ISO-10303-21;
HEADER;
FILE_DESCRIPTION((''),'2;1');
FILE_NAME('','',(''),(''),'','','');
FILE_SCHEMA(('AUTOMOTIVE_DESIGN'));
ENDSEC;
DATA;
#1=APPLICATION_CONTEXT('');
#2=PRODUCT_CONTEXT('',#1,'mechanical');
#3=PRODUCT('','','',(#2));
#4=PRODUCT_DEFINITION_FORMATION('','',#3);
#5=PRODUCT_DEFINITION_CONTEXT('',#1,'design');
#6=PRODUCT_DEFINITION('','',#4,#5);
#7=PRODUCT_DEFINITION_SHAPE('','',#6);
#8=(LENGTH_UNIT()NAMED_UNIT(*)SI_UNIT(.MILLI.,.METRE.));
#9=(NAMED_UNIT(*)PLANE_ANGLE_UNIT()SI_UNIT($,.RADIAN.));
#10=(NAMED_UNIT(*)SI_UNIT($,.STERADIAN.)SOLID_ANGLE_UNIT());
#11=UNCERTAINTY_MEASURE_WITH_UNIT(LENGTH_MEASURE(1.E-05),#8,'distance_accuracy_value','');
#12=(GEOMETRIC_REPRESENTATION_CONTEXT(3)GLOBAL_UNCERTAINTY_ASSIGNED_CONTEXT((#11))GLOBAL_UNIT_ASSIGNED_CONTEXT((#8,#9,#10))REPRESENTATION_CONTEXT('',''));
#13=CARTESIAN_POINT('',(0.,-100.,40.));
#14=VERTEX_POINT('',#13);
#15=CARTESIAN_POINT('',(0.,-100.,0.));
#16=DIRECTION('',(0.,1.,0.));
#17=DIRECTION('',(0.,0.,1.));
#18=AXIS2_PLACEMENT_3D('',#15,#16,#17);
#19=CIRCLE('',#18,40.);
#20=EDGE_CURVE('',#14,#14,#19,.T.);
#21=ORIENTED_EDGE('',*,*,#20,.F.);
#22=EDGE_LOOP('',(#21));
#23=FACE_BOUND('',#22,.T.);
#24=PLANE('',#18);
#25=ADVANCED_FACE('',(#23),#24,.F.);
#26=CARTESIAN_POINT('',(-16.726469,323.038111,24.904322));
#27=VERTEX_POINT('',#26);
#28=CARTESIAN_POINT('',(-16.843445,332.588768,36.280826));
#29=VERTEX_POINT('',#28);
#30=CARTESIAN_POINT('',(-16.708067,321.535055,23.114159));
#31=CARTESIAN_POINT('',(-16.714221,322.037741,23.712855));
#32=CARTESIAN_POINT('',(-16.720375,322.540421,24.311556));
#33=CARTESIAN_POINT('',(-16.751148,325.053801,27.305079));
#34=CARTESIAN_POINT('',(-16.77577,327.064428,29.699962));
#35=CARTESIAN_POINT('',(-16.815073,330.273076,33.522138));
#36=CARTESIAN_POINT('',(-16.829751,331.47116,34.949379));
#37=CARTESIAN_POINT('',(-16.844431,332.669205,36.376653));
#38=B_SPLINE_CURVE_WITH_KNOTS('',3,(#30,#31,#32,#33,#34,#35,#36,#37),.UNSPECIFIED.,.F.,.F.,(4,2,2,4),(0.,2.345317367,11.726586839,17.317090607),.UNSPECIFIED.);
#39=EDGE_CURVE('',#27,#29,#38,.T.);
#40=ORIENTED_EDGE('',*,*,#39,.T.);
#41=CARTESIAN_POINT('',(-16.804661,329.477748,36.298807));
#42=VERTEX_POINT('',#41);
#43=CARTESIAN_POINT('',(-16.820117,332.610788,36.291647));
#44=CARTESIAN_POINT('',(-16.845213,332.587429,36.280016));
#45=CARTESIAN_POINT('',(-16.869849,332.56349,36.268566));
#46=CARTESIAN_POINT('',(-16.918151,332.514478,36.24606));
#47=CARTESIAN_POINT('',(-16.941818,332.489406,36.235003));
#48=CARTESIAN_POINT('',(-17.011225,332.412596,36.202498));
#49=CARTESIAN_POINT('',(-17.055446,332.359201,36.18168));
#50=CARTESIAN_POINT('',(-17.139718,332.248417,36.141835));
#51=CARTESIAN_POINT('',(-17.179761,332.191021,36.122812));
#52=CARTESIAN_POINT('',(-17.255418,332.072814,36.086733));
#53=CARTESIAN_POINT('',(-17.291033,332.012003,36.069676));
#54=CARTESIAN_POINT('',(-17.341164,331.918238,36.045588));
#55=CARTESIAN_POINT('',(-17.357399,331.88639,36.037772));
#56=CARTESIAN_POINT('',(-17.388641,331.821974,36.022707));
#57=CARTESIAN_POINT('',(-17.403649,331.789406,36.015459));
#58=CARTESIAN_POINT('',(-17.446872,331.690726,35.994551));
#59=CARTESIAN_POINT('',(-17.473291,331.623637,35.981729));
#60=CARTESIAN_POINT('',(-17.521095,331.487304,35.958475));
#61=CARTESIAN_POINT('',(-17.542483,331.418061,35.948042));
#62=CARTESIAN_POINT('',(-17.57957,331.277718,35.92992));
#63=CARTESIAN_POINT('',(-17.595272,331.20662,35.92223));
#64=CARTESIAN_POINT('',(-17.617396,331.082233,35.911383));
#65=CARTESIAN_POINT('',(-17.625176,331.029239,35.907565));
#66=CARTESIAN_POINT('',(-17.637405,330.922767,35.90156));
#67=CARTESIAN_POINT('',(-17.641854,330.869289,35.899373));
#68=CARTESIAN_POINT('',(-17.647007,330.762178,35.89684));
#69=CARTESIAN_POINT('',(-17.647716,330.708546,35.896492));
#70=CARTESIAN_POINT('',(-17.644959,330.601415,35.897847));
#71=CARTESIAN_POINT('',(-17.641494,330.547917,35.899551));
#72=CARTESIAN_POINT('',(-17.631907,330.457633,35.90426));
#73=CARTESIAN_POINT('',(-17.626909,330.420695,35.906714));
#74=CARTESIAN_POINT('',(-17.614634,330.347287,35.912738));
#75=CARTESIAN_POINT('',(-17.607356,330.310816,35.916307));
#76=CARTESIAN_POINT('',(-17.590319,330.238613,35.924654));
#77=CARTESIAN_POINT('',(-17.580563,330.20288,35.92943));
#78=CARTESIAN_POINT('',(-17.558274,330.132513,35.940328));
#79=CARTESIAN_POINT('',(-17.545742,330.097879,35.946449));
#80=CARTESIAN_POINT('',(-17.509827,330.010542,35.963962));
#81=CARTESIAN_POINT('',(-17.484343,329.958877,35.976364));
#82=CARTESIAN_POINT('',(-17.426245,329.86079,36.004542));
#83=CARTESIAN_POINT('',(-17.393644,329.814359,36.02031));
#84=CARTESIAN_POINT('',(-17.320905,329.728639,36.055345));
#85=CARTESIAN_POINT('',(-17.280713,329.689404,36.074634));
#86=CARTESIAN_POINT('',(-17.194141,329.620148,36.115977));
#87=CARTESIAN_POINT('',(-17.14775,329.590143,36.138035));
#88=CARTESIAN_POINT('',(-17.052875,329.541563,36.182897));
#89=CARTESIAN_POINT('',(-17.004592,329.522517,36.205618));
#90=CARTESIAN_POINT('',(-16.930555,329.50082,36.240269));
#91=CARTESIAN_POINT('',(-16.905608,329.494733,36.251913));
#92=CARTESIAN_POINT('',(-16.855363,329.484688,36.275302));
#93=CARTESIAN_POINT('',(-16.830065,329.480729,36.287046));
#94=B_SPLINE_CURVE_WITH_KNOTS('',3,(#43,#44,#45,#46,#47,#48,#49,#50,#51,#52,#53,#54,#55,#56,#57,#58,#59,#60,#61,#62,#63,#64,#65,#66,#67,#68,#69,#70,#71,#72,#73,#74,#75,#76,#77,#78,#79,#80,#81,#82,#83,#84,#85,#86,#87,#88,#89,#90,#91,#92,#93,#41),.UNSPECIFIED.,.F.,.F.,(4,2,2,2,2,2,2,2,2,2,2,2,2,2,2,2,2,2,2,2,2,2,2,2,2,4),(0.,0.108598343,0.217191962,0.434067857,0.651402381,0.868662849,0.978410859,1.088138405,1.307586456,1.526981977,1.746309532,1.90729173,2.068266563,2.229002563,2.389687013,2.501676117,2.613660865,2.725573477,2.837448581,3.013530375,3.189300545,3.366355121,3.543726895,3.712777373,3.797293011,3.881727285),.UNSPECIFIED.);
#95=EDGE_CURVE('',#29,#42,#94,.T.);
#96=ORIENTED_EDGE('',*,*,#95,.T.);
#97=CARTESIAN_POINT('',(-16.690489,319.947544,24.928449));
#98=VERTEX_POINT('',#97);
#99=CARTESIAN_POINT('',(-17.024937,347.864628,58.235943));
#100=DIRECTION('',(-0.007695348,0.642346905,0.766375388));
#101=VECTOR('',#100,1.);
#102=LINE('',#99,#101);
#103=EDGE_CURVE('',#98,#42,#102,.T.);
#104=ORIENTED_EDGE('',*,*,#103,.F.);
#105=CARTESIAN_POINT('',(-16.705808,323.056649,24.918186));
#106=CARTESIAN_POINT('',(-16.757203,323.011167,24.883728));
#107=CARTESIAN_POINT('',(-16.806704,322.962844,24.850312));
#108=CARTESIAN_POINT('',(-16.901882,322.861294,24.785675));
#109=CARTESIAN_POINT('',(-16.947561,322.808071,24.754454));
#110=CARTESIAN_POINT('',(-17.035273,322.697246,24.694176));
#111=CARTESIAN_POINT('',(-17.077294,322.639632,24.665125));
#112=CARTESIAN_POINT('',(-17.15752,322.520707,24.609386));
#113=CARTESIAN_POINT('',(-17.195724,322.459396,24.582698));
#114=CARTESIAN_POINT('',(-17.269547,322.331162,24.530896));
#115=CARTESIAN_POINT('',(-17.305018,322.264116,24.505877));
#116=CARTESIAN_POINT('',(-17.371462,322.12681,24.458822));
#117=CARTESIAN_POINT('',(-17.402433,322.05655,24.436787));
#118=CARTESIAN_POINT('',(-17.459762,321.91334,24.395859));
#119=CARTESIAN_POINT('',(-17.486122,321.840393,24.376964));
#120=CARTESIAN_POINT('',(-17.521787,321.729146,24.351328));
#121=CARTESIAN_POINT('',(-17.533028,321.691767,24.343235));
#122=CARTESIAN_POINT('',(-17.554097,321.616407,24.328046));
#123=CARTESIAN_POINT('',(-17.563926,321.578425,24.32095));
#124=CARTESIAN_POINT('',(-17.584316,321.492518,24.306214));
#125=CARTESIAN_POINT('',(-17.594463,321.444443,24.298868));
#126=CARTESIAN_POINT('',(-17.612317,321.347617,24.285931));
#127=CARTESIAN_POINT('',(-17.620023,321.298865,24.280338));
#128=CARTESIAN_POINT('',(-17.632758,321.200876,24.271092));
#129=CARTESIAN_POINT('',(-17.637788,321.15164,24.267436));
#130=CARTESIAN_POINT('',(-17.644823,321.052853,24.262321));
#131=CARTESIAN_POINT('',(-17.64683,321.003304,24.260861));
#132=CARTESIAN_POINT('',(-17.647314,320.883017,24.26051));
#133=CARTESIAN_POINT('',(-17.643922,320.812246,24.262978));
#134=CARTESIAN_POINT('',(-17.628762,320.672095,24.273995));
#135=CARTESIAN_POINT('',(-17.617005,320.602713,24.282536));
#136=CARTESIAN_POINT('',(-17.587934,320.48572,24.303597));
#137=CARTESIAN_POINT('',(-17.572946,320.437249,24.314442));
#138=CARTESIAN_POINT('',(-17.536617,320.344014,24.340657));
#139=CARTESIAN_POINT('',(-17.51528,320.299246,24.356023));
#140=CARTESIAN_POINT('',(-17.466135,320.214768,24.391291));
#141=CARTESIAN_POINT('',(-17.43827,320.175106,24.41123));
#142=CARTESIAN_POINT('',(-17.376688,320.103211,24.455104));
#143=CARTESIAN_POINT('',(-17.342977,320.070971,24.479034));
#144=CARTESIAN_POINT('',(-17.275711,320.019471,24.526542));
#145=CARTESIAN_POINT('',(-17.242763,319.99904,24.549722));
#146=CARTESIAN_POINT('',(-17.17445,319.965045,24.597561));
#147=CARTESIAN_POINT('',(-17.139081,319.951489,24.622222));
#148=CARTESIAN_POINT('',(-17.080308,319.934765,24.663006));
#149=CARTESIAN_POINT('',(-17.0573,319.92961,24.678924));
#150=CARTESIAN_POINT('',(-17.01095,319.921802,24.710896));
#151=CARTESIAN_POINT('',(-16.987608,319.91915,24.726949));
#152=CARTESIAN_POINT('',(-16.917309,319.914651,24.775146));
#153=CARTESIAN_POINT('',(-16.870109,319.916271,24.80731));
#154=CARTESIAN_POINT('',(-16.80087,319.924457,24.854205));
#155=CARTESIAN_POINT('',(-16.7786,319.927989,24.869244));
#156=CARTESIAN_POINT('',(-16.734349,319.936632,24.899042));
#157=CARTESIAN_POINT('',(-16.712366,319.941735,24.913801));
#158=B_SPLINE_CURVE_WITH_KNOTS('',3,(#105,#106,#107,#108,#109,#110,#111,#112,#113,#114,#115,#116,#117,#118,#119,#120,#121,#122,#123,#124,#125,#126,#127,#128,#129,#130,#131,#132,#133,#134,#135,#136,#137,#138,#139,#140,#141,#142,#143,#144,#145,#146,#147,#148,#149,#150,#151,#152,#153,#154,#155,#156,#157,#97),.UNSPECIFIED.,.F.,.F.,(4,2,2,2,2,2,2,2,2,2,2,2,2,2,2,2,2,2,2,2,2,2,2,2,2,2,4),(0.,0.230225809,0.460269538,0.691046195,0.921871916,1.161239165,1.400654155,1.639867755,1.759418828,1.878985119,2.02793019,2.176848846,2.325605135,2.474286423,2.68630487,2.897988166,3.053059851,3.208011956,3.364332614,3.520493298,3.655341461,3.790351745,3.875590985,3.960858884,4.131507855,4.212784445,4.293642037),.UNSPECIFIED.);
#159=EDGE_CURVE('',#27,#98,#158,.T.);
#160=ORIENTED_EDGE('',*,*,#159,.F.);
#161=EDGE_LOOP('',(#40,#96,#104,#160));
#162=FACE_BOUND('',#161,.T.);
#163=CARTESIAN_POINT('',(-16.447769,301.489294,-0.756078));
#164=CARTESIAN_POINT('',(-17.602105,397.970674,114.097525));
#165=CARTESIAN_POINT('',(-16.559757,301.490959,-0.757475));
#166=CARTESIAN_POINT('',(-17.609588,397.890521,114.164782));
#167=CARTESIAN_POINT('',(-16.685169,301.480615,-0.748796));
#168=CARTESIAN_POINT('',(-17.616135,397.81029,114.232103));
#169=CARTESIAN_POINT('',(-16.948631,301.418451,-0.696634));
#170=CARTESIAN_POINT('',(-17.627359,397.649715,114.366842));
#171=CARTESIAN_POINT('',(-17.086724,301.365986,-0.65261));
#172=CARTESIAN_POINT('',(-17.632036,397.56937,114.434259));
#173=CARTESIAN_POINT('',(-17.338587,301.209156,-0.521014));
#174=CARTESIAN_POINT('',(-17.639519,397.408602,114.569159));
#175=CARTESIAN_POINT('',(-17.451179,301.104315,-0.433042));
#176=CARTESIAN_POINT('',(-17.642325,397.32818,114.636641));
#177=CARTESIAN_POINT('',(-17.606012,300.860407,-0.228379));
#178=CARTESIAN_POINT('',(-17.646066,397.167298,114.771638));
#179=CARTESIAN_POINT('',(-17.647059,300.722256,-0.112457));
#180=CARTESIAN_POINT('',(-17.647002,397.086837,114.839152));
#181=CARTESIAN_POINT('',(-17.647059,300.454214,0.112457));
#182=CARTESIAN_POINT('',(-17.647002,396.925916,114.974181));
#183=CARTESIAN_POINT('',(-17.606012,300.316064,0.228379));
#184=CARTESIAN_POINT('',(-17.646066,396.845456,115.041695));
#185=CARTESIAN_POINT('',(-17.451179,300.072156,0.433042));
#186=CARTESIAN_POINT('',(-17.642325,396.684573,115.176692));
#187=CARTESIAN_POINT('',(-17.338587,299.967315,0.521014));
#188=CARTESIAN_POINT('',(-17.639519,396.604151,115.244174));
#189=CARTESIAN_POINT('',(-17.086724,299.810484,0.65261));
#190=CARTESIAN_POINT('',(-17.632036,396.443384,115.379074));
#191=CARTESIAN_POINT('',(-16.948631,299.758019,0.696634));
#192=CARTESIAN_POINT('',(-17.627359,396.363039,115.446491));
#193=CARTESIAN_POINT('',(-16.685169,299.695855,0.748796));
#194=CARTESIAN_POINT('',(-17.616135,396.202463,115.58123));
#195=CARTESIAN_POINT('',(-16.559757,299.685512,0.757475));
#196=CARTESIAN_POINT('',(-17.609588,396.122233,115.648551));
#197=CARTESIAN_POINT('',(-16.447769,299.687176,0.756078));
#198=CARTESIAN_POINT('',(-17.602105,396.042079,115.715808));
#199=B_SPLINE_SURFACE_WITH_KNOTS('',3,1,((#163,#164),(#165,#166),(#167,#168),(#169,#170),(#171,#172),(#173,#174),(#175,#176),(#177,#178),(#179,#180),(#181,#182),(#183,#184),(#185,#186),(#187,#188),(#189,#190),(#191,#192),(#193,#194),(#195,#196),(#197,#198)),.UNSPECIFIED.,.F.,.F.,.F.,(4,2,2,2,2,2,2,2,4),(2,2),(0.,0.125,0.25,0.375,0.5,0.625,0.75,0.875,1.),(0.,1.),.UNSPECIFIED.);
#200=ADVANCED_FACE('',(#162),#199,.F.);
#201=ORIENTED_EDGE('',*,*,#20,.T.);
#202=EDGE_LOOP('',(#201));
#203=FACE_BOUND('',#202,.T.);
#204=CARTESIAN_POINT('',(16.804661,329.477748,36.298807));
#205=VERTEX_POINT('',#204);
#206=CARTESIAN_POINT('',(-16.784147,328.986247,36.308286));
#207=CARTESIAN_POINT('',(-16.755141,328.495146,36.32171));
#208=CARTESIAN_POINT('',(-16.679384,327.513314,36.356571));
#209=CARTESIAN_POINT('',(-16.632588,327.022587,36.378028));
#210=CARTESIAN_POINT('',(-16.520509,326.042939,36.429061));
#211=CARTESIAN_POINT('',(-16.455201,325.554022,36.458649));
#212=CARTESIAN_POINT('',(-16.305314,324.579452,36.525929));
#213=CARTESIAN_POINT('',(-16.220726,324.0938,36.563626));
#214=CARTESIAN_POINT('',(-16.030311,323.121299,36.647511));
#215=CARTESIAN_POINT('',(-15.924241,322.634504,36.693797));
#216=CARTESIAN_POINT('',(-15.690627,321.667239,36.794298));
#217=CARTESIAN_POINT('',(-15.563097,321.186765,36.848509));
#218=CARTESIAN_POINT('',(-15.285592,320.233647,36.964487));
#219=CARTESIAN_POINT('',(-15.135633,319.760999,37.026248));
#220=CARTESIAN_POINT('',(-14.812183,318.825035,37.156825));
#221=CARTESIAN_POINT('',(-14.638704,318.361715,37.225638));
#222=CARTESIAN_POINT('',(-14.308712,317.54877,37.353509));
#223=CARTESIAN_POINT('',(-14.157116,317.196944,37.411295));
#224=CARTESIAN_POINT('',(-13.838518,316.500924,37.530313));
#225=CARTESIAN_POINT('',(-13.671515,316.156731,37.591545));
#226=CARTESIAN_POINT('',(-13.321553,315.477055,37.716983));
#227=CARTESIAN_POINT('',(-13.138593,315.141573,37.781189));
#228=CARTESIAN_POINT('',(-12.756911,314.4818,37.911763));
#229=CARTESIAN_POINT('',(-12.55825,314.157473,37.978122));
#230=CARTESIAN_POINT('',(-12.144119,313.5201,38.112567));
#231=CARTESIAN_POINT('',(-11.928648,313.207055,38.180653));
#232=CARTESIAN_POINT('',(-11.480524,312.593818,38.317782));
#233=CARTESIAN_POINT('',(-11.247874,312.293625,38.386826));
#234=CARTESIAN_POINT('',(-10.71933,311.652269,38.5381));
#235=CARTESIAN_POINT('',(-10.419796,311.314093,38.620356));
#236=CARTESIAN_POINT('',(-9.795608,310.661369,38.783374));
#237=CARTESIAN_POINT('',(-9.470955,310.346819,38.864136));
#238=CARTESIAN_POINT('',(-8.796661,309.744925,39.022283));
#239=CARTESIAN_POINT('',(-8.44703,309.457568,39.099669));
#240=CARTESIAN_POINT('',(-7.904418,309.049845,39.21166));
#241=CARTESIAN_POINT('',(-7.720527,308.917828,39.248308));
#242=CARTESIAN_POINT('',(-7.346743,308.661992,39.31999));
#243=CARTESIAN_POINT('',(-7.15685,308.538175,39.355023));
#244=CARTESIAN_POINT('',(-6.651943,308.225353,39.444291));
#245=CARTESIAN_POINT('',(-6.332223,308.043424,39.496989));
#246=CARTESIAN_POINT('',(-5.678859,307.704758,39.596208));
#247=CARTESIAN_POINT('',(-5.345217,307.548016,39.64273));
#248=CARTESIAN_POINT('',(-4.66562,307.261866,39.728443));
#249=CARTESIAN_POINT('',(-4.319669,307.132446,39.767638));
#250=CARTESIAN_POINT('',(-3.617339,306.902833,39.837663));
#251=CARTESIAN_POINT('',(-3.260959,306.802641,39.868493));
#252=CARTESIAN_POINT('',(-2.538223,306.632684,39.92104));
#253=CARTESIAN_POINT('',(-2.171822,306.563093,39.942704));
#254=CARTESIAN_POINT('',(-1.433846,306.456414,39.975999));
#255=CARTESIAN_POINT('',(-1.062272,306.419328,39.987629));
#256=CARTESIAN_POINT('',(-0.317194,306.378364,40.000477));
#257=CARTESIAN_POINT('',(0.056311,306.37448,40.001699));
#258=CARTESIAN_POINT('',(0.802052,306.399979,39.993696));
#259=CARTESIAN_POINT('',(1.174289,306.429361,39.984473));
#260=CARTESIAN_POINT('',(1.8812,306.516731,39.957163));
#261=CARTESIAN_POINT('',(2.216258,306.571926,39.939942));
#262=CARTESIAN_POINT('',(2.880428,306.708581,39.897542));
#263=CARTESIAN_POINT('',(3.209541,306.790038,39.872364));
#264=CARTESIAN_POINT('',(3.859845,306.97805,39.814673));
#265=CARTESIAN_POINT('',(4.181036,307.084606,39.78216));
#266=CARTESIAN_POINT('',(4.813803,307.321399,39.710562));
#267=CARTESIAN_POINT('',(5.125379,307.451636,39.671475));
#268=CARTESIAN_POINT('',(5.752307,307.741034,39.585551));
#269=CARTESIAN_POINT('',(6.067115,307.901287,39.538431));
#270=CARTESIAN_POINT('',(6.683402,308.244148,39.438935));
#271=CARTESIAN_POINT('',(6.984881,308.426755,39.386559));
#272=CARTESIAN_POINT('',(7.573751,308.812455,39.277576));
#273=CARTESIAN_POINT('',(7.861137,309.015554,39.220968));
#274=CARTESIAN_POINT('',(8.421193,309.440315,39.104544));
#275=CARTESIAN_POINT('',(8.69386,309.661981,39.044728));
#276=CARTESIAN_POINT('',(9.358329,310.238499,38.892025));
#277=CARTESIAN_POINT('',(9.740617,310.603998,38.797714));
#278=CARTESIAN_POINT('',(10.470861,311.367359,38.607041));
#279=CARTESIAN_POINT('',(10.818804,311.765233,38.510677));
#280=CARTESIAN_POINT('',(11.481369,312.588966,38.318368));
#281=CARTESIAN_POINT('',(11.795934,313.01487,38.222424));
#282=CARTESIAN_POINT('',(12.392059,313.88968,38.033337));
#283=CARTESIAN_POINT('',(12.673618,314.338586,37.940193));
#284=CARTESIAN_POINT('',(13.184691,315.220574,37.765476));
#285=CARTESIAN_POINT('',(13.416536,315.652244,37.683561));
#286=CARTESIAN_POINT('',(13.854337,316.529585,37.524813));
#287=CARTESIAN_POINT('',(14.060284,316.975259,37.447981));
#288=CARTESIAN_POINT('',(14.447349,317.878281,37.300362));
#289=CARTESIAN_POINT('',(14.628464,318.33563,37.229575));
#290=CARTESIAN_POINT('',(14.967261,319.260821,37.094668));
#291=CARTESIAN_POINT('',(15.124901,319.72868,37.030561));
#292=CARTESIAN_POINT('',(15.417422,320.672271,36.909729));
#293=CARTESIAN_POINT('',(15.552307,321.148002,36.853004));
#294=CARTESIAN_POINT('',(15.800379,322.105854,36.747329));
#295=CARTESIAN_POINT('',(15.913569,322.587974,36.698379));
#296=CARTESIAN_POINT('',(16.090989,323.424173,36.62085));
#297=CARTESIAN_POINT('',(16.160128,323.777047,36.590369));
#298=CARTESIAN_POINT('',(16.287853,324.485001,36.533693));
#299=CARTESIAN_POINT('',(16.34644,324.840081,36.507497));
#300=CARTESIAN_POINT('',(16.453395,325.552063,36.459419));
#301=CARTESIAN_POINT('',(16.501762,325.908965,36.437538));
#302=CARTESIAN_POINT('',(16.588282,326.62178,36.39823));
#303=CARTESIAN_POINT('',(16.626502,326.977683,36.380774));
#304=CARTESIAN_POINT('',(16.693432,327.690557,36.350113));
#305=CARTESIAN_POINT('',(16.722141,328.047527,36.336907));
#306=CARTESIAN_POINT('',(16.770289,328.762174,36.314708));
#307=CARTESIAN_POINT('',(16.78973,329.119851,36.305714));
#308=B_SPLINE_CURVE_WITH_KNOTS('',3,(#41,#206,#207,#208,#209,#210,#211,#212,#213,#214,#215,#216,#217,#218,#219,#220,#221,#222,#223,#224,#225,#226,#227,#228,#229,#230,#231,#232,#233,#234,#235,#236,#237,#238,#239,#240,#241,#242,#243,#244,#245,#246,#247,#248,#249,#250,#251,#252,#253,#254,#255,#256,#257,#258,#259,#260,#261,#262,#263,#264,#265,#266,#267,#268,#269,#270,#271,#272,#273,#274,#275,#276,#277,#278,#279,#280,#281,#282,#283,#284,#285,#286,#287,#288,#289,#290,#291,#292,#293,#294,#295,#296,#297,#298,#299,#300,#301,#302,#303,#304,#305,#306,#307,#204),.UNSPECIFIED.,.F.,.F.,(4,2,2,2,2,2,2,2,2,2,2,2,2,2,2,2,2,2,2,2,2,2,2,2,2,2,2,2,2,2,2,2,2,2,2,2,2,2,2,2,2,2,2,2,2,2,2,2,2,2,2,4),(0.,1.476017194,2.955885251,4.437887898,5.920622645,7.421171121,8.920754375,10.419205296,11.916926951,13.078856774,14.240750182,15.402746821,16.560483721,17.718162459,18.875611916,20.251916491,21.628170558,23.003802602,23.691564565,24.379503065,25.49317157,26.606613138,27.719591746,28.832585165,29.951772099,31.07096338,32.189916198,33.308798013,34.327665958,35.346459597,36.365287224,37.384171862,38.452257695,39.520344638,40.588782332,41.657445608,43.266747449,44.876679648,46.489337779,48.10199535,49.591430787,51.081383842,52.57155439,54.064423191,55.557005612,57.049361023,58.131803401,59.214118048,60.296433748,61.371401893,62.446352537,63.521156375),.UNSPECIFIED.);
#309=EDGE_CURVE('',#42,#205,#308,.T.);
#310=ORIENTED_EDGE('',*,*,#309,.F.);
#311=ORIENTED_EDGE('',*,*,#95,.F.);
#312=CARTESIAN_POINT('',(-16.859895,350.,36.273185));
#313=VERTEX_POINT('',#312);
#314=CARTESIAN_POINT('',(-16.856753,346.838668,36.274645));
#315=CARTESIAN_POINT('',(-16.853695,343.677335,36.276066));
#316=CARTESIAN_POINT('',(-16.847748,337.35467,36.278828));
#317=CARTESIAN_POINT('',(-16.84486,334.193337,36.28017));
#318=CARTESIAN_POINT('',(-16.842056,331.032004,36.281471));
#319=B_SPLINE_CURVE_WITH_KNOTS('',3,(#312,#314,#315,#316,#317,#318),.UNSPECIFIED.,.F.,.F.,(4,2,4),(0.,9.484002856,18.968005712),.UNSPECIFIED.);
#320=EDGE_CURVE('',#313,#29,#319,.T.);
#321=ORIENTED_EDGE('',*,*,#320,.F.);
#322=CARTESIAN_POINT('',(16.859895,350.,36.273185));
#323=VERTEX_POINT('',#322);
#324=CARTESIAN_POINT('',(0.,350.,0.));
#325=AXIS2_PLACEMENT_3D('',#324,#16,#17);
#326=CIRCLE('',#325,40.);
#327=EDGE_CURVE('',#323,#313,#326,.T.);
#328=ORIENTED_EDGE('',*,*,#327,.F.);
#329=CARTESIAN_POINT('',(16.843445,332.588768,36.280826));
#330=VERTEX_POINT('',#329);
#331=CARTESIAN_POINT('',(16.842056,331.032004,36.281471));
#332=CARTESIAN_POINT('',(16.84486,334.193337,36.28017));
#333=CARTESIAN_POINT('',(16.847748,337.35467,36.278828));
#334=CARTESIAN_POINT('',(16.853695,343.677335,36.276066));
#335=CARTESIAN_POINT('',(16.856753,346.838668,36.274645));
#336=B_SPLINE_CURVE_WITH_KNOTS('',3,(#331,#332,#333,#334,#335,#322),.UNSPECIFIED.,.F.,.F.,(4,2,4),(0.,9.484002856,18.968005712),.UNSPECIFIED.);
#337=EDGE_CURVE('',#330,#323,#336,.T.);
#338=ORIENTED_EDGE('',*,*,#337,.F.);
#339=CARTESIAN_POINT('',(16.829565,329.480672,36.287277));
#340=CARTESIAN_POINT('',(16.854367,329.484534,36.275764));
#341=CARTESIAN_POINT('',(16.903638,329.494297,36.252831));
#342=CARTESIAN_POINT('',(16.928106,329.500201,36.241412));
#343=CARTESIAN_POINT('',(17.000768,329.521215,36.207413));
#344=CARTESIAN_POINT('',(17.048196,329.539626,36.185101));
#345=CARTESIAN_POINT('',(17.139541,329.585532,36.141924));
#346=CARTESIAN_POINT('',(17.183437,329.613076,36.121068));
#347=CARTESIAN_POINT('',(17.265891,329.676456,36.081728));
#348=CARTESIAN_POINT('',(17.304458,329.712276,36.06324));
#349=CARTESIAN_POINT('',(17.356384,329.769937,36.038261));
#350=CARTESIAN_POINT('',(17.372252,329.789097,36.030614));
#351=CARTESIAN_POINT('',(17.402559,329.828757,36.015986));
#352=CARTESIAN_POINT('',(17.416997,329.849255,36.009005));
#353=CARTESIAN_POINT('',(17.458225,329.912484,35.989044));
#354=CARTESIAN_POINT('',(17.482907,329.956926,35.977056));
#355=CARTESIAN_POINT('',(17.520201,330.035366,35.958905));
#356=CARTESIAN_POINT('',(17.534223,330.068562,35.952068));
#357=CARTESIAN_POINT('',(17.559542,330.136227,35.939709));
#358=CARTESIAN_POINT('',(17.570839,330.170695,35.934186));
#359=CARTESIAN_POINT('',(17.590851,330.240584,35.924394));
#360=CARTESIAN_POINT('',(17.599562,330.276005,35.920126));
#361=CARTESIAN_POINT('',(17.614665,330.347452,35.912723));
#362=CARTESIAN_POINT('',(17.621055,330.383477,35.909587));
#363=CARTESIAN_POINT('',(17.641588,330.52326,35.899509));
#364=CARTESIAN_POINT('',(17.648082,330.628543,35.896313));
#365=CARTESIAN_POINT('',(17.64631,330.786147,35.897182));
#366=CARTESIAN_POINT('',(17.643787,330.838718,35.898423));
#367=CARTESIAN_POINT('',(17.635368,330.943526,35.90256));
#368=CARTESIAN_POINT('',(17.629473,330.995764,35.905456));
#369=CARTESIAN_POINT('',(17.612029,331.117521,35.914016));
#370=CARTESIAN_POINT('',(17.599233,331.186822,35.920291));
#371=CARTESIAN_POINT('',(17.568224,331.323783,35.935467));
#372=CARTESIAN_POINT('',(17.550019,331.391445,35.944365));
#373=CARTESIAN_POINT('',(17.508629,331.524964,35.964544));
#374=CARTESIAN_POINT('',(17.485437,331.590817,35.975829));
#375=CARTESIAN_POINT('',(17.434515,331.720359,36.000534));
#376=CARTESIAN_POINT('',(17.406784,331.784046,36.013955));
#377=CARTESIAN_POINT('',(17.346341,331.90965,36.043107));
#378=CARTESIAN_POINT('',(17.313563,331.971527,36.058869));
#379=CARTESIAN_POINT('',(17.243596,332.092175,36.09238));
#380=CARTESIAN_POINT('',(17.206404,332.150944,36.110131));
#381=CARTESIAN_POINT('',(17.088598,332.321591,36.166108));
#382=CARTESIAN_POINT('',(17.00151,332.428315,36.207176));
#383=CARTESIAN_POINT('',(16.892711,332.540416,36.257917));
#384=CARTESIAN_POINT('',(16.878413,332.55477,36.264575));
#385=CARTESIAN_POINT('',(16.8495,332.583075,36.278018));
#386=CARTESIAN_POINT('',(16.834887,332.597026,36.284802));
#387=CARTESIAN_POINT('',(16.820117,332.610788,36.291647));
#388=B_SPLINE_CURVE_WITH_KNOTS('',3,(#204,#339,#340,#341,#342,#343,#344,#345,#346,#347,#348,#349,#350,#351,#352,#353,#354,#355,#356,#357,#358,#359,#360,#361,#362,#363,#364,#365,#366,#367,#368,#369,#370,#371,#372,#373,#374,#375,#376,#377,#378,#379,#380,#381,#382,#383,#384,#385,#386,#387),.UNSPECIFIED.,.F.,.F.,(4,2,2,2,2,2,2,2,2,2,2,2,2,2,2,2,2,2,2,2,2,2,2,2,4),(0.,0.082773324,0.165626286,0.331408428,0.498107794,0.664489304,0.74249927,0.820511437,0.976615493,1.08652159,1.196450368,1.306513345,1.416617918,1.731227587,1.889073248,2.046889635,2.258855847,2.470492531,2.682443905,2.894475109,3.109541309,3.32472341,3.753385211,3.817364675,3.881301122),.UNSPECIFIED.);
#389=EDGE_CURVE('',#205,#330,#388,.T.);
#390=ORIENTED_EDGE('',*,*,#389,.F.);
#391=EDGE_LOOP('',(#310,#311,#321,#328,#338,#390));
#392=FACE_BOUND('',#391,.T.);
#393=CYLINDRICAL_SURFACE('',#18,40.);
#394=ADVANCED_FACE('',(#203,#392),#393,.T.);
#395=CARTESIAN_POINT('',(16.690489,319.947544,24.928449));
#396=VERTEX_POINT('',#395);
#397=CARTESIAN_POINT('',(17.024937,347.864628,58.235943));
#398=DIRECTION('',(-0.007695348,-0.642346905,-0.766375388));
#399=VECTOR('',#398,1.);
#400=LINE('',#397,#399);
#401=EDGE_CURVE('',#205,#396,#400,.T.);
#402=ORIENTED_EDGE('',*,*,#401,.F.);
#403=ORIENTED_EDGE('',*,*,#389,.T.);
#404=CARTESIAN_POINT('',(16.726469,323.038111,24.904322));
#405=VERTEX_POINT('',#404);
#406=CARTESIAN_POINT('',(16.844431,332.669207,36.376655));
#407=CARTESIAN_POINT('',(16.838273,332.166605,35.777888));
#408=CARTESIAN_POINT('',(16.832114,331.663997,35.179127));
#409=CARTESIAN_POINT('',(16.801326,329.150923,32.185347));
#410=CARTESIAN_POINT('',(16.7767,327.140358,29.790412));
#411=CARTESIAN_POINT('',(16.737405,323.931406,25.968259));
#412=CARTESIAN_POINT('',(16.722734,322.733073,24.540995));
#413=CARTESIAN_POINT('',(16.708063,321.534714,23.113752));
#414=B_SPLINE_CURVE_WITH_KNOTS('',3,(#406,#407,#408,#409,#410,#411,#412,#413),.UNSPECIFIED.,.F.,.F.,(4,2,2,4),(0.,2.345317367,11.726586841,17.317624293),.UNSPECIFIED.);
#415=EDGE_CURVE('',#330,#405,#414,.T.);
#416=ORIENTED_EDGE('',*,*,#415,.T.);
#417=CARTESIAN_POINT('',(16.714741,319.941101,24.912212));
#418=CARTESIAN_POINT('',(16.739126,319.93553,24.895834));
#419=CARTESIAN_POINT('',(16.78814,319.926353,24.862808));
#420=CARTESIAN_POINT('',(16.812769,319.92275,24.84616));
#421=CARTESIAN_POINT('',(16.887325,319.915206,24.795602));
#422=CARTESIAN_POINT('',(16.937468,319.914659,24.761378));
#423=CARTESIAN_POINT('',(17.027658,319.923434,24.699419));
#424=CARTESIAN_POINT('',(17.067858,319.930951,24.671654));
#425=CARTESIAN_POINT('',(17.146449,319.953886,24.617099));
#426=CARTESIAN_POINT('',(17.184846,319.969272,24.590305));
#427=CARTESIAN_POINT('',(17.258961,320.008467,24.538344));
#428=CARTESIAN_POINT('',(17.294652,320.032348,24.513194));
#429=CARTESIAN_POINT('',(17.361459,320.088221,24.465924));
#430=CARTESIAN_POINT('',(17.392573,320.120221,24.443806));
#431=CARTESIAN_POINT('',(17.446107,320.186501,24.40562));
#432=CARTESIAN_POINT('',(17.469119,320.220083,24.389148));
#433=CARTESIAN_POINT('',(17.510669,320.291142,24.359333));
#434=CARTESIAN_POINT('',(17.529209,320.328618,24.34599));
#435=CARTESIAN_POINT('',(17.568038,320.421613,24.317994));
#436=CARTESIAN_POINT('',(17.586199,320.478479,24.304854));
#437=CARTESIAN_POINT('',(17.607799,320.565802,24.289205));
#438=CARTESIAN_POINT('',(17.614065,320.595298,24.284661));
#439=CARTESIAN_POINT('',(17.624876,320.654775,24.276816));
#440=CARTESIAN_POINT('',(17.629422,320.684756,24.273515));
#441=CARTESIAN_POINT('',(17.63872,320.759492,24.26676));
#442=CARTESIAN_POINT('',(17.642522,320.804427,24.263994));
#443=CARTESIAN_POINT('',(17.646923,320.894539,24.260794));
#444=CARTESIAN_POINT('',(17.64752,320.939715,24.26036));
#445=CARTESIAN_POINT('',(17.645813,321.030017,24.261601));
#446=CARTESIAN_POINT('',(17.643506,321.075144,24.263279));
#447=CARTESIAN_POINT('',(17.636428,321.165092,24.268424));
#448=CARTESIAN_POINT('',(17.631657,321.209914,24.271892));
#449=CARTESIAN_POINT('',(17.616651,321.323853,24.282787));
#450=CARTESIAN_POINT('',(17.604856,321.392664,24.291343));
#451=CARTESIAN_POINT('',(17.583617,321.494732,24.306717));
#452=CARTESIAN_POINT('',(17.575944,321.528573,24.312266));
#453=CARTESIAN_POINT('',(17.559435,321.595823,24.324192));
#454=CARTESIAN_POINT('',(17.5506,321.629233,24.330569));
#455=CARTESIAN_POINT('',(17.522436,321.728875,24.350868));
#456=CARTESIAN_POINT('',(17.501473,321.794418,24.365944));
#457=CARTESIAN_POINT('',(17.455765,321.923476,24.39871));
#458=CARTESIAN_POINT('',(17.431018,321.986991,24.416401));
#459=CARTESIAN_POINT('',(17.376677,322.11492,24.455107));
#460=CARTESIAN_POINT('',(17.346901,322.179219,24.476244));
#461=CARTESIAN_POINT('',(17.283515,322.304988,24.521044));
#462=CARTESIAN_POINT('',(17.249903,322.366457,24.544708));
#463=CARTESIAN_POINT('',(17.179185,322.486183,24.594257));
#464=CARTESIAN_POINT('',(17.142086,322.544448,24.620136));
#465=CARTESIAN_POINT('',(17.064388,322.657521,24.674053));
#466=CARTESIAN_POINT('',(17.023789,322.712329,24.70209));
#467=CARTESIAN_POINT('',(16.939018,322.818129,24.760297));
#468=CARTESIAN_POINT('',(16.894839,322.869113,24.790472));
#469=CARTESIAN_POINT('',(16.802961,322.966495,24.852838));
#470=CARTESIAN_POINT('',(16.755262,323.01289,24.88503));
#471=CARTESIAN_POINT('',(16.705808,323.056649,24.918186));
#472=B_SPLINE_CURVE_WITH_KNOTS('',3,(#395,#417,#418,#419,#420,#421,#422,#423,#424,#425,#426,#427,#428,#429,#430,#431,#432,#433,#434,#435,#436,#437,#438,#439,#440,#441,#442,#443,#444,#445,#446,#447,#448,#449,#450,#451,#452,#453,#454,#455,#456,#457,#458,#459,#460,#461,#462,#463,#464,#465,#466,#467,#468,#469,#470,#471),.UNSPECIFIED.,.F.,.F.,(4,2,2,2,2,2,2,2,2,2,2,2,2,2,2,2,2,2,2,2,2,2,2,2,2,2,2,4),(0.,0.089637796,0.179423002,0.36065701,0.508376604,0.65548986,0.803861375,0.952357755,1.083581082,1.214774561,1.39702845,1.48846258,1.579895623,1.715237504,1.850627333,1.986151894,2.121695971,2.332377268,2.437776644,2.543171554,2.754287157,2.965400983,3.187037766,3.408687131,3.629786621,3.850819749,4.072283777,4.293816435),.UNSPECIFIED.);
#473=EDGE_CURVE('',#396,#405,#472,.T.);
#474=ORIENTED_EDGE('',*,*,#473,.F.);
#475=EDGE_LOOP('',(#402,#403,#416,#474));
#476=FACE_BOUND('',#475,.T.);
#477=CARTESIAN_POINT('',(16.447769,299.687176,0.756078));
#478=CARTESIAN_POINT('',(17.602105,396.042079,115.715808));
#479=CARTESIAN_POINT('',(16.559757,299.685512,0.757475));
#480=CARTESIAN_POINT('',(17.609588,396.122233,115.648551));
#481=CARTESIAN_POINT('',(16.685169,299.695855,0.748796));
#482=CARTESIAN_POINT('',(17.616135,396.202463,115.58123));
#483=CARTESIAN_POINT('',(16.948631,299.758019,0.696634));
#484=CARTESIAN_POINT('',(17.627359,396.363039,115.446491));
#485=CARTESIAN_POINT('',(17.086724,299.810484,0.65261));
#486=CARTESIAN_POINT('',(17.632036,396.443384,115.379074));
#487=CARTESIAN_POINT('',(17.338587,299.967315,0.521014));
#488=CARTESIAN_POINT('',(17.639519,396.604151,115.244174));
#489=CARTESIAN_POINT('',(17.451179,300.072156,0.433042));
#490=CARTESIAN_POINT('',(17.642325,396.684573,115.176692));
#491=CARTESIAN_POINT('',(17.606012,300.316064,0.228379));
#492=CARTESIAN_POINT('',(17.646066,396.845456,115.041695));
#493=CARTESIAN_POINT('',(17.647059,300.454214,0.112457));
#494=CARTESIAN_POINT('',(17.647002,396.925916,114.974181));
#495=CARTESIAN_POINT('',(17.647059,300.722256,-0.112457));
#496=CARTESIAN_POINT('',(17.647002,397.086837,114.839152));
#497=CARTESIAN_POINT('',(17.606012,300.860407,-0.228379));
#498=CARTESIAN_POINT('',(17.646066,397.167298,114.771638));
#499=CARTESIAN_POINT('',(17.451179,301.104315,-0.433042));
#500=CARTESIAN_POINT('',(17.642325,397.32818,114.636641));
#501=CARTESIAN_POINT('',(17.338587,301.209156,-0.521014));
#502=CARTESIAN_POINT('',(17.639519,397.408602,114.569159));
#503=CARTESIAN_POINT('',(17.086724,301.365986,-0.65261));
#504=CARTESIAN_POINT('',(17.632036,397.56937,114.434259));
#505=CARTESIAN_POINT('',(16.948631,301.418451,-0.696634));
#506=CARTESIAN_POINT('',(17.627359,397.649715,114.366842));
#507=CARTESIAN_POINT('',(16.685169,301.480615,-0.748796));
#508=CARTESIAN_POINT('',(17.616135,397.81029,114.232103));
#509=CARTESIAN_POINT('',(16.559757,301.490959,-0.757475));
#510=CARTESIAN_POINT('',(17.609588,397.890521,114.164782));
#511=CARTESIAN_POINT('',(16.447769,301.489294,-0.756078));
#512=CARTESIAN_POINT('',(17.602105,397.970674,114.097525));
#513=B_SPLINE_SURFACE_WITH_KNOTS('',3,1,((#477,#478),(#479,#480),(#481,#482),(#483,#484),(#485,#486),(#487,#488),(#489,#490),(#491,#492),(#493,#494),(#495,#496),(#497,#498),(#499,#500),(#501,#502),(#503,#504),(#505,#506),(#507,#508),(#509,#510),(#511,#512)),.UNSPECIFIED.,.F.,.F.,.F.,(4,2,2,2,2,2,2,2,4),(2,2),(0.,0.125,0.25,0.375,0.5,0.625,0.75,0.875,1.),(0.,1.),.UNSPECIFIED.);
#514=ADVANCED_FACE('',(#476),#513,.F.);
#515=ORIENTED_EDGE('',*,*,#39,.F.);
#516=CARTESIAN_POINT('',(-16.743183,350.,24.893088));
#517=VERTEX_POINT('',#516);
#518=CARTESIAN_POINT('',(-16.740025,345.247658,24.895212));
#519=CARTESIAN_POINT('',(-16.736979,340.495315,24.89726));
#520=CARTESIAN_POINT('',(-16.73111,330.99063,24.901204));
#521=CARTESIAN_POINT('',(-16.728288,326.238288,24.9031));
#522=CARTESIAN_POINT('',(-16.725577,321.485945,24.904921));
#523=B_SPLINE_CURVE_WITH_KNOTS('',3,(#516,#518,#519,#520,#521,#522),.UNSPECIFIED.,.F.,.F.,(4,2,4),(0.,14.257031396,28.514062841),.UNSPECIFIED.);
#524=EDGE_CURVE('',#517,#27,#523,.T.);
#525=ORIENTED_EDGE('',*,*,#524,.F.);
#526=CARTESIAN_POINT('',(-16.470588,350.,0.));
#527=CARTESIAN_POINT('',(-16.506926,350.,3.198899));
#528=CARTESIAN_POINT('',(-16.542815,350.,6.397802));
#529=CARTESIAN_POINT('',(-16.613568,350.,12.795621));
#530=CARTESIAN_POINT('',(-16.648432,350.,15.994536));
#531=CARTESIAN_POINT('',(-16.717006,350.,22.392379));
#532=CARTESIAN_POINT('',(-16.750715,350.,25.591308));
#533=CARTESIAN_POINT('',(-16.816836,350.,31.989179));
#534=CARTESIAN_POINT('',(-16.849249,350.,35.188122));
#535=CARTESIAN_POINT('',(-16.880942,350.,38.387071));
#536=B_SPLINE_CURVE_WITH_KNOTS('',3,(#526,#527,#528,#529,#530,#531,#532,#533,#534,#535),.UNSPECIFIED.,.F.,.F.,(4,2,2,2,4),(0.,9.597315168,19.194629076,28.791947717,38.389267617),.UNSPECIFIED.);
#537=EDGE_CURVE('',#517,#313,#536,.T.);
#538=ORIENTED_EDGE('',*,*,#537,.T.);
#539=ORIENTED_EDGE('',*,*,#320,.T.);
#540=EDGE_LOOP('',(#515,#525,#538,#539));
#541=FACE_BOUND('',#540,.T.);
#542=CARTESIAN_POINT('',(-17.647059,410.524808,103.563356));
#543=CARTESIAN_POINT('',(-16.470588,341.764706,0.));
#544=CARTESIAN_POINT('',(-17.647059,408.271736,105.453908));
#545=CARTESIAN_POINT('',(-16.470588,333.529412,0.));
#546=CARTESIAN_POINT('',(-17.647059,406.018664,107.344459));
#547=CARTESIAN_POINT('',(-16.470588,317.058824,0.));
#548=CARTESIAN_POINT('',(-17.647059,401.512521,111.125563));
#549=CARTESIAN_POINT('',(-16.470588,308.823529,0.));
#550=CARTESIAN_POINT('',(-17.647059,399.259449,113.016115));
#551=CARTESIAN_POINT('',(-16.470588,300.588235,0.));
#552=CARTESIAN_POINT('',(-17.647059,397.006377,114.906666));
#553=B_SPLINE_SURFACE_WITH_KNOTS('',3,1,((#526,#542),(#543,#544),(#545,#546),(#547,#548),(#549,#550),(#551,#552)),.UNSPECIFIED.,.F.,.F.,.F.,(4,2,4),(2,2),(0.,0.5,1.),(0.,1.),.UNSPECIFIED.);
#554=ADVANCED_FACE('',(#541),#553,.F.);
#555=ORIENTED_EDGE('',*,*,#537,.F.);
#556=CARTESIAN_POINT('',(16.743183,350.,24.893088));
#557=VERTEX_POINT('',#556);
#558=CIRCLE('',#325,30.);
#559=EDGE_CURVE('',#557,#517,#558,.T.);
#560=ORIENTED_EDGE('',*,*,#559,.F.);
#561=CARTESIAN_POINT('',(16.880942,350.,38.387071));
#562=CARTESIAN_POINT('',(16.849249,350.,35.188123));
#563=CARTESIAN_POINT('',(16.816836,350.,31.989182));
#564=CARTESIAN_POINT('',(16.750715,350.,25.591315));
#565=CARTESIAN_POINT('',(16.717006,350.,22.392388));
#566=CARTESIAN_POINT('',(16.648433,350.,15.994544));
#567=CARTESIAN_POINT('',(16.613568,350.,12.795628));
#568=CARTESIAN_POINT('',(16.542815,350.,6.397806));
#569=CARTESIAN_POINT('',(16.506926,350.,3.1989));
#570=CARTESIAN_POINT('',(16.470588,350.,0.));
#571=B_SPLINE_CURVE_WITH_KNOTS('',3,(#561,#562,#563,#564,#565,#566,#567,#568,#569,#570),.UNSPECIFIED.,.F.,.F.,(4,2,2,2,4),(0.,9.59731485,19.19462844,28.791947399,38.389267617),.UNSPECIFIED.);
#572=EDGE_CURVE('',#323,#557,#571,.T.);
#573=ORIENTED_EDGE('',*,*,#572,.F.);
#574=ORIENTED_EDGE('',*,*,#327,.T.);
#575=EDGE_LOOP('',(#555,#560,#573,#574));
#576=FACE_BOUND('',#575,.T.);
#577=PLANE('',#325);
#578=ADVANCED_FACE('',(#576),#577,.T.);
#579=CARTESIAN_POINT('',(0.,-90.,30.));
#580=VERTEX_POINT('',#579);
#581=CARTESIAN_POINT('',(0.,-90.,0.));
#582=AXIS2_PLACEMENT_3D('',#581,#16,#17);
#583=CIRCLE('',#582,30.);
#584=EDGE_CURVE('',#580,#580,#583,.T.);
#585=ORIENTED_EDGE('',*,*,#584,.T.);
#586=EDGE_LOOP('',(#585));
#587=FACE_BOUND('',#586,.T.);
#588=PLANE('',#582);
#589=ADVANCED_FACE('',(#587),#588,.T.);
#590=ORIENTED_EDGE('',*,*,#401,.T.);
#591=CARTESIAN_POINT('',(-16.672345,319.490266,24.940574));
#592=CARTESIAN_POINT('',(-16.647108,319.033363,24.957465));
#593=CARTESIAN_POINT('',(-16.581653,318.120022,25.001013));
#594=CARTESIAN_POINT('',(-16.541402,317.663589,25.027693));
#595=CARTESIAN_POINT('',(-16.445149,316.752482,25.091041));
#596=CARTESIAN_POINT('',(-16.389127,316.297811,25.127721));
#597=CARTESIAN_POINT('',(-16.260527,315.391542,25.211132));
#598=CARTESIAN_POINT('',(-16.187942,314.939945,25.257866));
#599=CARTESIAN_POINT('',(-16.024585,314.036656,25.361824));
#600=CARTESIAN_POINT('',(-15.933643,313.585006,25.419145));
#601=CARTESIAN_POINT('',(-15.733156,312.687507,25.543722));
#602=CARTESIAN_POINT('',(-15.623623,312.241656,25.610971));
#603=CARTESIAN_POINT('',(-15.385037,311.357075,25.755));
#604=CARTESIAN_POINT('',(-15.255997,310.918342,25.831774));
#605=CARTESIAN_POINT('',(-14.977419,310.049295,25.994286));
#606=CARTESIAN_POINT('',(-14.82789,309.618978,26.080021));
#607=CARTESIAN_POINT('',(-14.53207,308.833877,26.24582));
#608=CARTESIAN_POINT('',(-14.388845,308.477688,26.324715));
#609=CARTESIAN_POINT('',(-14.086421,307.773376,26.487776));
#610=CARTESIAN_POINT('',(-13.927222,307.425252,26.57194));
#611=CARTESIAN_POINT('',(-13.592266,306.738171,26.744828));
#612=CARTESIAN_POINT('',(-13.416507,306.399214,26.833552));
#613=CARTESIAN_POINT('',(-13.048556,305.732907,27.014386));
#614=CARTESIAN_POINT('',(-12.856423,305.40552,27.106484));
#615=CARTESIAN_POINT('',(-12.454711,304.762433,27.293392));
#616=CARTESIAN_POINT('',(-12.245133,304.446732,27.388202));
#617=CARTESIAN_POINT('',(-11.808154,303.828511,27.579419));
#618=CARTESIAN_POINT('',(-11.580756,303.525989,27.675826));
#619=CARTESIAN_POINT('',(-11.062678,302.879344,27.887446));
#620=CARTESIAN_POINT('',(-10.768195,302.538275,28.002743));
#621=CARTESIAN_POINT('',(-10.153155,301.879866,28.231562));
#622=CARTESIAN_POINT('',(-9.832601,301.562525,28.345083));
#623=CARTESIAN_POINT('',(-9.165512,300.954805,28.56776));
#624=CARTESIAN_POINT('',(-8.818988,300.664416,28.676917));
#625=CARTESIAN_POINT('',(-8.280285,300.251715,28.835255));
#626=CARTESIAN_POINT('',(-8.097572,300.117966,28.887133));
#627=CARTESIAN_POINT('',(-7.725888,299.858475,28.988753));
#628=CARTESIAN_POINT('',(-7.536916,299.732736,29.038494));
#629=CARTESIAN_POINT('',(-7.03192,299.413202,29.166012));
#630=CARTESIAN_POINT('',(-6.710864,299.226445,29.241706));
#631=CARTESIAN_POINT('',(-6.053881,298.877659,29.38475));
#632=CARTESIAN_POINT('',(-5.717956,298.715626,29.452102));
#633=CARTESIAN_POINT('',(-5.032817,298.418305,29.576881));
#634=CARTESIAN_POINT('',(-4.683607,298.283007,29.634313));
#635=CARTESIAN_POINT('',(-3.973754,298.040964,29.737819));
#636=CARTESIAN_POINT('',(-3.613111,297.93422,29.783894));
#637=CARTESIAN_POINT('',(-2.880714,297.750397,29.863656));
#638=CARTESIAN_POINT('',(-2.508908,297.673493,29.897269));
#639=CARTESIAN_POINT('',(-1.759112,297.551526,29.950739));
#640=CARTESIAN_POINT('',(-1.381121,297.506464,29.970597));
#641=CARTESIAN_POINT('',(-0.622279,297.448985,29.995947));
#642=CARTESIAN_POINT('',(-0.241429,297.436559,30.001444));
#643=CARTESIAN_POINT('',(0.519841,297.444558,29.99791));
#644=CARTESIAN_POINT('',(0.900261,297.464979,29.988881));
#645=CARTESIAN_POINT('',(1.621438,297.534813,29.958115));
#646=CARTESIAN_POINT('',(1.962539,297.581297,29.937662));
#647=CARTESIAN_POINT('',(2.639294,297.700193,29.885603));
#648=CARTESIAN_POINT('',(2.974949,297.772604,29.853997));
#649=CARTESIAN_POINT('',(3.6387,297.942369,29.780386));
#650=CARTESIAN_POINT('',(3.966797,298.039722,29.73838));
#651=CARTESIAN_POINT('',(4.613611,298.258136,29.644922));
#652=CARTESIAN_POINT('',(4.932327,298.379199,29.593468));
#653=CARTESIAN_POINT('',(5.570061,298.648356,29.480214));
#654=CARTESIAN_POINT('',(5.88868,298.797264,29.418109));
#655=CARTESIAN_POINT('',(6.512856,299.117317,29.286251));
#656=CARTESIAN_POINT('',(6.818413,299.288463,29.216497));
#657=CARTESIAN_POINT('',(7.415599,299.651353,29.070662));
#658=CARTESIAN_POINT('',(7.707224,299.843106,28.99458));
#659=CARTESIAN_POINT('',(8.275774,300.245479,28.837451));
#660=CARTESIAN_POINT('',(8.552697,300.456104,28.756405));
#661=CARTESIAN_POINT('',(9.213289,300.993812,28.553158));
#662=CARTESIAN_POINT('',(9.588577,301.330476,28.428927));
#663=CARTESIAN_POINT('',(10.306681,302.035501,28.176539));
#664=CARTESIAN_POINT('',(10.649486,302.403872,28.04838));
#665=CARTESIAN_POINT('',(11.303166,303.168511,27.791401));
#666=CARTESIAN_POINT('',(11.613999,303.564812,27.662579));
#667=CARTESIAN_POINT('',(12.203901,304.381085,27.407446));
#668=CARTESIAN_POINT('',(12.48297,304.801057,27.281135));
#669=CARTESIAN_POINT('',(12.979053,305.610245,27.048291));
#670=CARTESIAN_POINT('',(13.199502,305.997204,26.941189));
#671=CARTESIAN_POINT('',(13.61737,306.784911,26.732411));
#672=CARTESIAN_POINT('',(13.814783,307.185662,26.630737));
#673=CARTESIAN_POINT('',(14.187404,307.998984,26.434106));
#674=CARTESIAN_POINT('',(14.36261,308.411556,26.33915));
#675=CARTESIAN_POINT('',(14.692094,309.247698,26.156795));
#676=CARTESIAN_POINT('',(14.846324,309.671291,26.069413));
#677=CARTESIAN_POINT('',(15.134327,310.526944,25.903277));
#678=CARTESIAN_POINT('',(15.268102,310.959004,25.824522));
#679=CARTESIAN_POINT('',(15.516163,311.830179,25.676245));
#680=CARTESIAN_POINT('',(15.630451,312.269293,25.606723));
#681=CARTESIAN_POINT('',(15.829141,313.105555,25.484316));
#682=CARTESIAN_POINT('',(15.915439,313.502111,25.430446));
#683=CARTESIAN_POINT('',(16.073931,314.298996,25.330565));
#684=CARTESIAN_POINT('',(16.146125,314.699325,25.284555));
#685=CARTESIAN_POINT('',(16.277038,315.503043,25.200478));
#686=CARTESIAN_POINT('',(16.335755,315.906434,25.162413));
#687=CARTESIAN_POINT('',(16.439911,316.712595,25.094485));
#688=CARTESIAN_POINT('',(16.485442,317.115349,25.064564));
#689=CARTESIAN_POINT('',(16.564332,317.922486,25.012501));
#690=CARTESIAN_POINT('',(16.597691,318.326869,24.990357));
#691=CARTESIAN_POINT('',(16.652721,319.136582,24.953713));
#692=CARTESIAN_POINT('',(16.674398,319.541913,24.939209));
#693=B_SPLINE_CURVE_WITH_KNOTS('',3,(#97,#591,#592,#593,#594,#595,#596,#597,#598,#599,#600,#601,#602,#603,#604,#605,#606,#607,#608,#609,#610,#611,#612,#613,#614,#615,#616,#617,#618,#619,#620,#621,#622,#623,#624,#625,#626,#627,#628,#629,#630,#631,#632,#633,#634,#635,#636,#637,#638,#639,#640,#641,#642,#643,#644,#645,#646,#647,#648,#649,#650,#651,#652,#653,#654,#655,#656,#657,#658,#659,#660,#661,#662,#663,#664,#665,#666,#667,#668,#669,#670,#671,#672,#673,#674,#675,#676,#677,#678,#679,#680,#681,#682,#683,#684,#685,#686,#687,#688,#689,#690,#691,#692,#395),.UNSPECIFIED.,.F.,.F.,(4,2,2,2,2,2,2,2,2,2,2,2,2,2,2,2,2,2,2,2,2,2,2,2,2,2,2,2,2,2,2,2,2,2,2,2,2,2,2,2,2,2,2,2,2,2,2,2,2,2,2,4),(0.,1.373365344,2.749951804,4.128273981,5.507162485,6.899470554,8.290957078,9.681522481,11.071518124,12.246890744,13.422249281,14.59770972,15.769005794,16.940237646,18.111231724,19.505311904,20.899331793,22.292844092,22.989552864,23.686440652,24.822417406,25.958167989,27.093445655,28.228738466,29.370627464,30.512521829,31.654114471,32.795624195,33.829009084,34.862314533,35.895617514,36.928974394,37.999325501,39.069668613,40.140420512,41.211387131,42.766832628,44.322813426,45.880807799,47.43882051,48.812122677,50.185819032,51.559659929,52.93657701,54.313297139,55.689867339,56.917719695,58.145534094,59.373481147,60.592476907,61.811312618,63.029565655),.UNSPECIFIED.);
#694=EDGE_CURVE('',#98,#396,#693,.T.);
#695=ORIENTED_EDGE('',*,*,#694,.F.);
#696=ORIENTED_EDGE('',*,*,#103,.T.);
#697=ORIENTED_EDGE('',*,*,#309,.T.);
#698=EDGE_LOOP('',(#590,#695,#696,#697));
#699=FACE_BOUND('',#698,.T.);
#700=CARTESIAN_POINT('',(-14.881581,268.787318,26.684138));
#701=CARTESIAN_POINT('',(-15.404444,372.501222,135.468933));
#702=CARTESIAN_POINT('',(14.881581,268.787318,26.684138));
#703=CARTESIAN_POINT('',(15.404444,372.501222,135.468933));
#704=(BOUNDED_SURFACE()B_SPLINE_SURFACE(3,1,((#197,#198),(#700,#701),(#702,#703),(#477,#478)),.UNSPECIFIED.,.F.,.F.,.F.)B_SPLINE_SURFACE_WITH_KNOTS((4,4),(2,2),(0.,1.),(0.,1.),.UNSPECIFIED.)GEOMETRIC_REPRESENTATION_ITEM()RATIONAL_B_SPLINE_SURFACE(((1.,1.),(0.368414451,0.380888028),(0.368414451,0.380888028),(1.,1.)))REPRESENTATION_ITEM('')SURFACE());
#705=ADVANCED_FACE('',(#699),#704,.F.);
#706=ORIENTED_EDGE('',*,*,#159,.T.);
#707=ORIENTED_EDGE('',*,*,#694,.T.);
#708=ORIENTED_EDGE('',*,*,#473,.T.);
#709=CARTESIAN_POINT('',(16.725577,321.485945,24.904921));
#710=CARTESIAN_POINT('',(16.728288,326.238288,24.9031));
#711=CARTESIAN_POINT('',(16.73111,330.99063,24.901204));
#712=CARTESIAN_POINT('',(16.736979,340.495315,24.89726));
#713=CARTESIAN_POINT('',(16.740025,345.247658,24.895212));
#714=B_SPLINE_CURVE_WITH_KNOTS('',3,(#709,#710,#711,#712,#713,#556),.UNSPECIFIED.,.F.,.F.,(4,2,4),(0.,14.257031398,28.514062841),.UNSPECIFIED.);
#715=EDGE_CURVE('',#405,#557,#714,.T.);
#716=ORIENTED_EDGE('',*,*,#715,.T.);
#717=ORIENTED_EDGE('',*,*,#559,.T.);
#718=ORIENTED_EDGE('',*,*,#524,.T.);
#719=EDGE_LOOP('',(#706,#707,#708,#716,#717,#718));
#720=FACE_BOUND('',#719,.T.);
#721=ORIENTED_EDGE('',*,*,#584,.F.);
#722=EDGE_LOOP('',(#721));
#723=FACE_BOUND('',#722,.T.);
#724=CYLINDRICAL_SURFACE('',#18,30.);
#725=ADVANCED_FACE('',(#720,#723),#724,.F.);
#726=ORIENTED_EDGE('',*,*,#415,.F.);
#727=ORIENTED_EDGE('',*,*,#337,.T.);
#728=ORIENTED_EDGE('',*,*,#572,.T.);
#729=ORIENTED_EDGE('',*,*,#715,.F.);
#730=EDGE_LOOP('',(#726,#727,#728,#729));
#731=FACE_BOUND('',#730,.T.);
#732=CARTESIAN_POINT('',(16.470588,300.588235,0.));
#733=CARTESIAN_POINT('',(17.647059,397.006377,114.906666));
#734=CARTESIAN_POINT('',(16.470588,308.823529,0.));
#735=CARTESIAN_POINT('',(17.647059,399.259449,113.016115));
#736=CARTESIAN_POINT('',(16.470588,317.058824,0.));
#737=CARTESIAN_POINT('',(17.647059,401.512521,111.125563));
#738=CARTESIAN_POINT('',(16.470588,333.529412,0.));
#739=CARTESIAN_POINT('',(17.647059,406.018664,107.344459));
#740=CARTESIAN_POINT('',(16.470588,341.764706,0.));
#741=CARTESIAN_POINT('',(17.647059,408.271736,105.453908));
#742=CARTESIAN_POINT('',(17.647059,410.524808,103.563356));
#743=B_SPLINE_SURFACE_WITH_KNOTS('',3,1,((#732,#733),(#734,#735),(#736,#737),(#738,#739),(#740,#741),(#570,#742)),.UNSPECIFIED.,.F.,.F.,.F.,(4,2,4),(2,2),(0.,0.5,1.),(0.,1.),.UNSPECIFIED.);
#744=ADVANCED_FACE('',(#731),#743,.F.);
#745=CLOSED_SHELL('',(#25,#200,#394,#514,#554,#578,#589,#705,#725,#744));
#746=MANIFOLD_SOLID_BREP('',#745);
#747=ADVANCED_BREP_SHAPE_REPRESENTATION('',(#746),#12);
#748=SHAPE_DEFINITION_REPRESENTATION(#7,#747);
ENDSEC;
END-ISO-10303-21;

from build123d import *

# Parameters (mm, degrees)
BOSS_EXTRUDE2_DEPTH      = 350
BOSS_EXTRUDE2_DEPTH_BACK = 100
SKETCH12_R               = 40
SHELL1_T                 = -10


with BuildPart() as part:
    # Sketch12 → Boss-Extrude2 (new, two sides: drawn at the far end of the back side and taken through both)
    with BuildSketch(Plane(origin=(0, 0, 0), x_dir=(1, 0, 0), z_dir=(0, 1, 0)).offset(-BOSS_EXTRUDE2_DEPTH_BACK)):
        with Locations(Location((0, 0, 0), (0, 0, 270))):
            Circle(SKETCH12_R)
    extrude(amount=BOSS_EXTRUDE2_DEPTH + BOSS_EXTRUDE2_DEPTH_BACK)

    # Shell1
    shell1_openings = [part.faces().sort_by_distance(p)[0] for p in [
        (0, 350, 0),
    ]]
    offset(amount=SHELL1_T, openings=shell1_openings, kind=Kind.INTERSECTION)

    # Cut-Loft1: read off the stored shape, not the designer's step
    # Cut-Loft1: loft between two sections, ruled curve by curve
    cut_loft1_from = [
        Edge.make_bspline([(16.447768561, 299.687176089, 0.756078446), (16.559756866, 299.68551177, 0.757474976), (16.685169468, 299.695855255, 0.748795762), (16.948630904, 299.758019264, 0.696633965), (17.086724057, 299.810484473, 0.652610427), (17.338586824, 299.967314565, 0.521014355), (17.451178642, 300.072155873, 0.433042052), (17.606011876, 300.316064015, 0.22837882), (17.647058824, 300.454214414, 0.112456871), (17.647058824, 300.722256174, -0.112456871), (17.606011876, 300.860406573, -0.22837882), (17.451178642, 301.104314716, -0.433042052), (17.338586824, 301.209156023, -0.521014355), (17.086724057, 301.365986115, -0.652610427), (16.948630904, 301.418451325, -0.696633965), (16.685169468, 301.480615333, -0.748795762), (16.559756866, 301.490958819, -0.757474976), (16.447768561, 301.489294499, -0.756078446)], [0, 0, 0, 0, 0.125, 0.125, 0.25, 0.25, 0.375, 0.375, 0.5, 0.5, 0.625, 0.625, 0.75, 0.75, 0.875, 0.875, 1, 1, 1, 1], 3),
        Edge.make_bspline([(16.447768561, 301.489294499, -0.756078446), (14.881581053, 332.389152096, -26.684137559), (-14.881581053, 332.389152096, -26.684137559), (-16.447768561, 301.489294499, -0.756078446)], [0, 0, 0, 0, 1, 1, 1, 1], 3, [1, 0.368414451, 0.368414451, 1]),
        Edge.make_bspline([(-16.447768561, 299.687176089, 0.756078446), (-14.881581053, 268.787318493, 26.684137559), (14.881581053, 268.787318493, 26.684137559), (16.447768561, 299.687176089, 0.756078446)], [0, 0, 0, 0, 1, 1, 1, 1], 3, [1, 0.368414451, 0.368414451, 1]),
        Edge.make_bspline([(-16.447768561, 301.489294499, -0.756078446), (-16.559756866, 301.490958819, -0.757474976), (-16.685169468, 301.480615333, -0.748795762), (-16.948630904, 301.418451325, -0.696633965), (-17.086724057, 301.365986115, -0.652610427), (-17.338586824, 301.209156023, -0.521014355), (-17.451178642, 301.104314716, -0.433042052), (-17.606011876, 300.860406573, -0.22837882), (-17.647058824, 300.722256174, -0.112456871), (-17.647058824, 300.454214414, 0.112456871), (-17.606011876, 300.316064015, 0.22837882), (-17.451178642, 300.072155873, 0.433042052), (-17.338586824, 299.967314565, 0.521014355), (-17.086724057, 299.810484473, 0.652610427), (-16.948630904, 299.758019264, 0.696633965), (-16.685169468, 299.695855255, 0.748795762), (-16.559756866, 299.68551177, 0.757474976), (-16.447768561, 299.687176089, 0.756078446)], [0, 0, 0, 0, 0.125, 0.125, 0.25, 0.25, 0.375, 0.375, 0.5, 0.5, 0.625, 0.625, 0.75, 0.75, 0.875, 0.875, 1, 1, 1, 1], 3),
    ]
    cut_loft1_to = [
        Edge.make_bspline([(17.602105154, 396.042079443, 115.71580798), (17.609587889, 396.12223285, 115.648551286), (17.616135283, 396.20246302, 115.58123018), (17.627359386, 396.363038504, 115.44649135), (17.632036096, 396.443383819, 115.379073626), (17.639518831, 396.604151212, 115.244173766), (17.642324857, 396.68457329, 115.17669163), (17.646066225, 396.845455828, 115.041695152), (17.647001567, 396.925916287, 114.97418081), (17.647001567, 397.086837207, 114.839152126), (17.646066225, 397.167297667, 114.771637784), (17.642324857, 397.328180204, 114.636641306), (17.639518831, 397.408602282, 114.569159169), (17.632036096, 397.569369675, 114.434259309), (17.627359386, 397.64971499, 114.366841585), (17.616135283, 397.810290475, 114.232102756), (17.609587889, 397.890520644, 114.16478165), (17.602105154, 397.970674051, 114.097524956)], [0, 0, 0, 0, 0.125, 0.125, 0.25, 0.25, 0.375, 0.375, 0.5, 0.5, 0.625, 0.625, 0.75, 0.75, 0.875, 0.875, 1, 1, 1, 1], 3),
        Edge.make_bspline([(17.602105154, 397.970674051, 114.097524956), (15.404444247, 421.511531348, 94.34440028), (-15.404444247, 421.511531348, 94.34440028), (-17.602105154, 397.970674051, 114.097524956)], [0, 0, 0, 0, 1, 1, 1, 1], 3, [1, 0.380888028, 0.380888028, 1]),
        Edge.make_bspline([(-17.602105154, 396.042079443, 115.71580798), (-15.404444247, 372.501222146, 135.468932655), (15.404444247, 372.501222146, 135.468932655), (17.602105154, 396.042079443, 115.71580798)], [0, 0, 0, 0, 1, 1, 1, 1], 3, [1, 0.380888028, 0.380888028, 1]),
        Edge.make_bspline([(-17.602105154, 397.970674051, 114.097524956), (-17.609587889, 397.890520644, 114.16478165), (-17.616135283, 397.810290475, 114.232102756), (-17.627359386, 397.64971499, 114.366841585), (-17.632036096, 397.569369675, 114.434259309), (-17.639518831, 397.408602282, 114.569159169), (-17.642324857, 397.328180204, 114.636641306), (-17.646066225, 397.167297667, 114.771637784), (-17.647001567, 397.086837207, 114.839152126), (-17.647001567, 396.925916287, 114.97418081), (-17.646066225, 396.845455828, 115.041695152), (-17.642324857, 396.68457329, 115.17669163), (-17.639518831, 396.604151212, 115.244173766), (-17.632036096, 396.443383819, 115.379073626), (-17.627359386, 396.363038504, 115.44649135), (-17.616135283, 396.20246302, 115.58123018), (-17.609587889, 396.12223285, 115.648551286), (-17.602105154, 396.042079443, 115.71580798)], [0, 0, 0, 0, 0.125, 0.125, 0.25, 0.25, 0.375, 0.375, 0.5, 0.5, 0.625, 0.625, 0.75, 0.75, 0.875, 0.875, 1, 1, 1, 1], 3),
    ]
    cut_loft1 = Solid(Shell([*[Face.make_surface_from_curves(cut_loft1_from[k], cut_loft1_to[k]) for k in range(4)], Face(Wire(cut_loft1_from)), Face(Wire(cut_loft1_to))]))
    add(cut_loft1, mode=Mode.SUBTRACT)

    # Sketch15 → Cut-Loft3 section 0
    with BuildSketch(Plane.XY):
        with BuildLine():
            Line((-16.470588235, 350), (16.470588235, 350))
            Line((16.470588235, 350), (16.470588235, 300.588235294))
            Line((16.470588235, 300.588235294), (-16.470588235, 300.588235294))
            Line((-16.470588235, 300.588235294), (-16.470588235, 350))
        make_face()
    # Sketch20 → Cut-Loft3 section 1
    with BuildSketch(Plane(origin=(0, 397.006376747, 114.906666468), x_dir=(1, 0, 0), z_dir=(0, 0.6427876096865435, 0.7660444431189747))):
        with BuildLine():
            Line((-17.647058824, 0), (-17.647058824, 17.647058824))
            Line((-17.647058824, 17.647058824), (17.647058824, 17.647058824))
            Line((17.647058824, 17.647058824), (17.647058824, 0))
            ThreePointArc((17.647058824, 0), (0, -17.647058824), (-17.647058824, 0))
        make_face()
    loft(mode=Mode.SUBTRACT)


solid = part.part
